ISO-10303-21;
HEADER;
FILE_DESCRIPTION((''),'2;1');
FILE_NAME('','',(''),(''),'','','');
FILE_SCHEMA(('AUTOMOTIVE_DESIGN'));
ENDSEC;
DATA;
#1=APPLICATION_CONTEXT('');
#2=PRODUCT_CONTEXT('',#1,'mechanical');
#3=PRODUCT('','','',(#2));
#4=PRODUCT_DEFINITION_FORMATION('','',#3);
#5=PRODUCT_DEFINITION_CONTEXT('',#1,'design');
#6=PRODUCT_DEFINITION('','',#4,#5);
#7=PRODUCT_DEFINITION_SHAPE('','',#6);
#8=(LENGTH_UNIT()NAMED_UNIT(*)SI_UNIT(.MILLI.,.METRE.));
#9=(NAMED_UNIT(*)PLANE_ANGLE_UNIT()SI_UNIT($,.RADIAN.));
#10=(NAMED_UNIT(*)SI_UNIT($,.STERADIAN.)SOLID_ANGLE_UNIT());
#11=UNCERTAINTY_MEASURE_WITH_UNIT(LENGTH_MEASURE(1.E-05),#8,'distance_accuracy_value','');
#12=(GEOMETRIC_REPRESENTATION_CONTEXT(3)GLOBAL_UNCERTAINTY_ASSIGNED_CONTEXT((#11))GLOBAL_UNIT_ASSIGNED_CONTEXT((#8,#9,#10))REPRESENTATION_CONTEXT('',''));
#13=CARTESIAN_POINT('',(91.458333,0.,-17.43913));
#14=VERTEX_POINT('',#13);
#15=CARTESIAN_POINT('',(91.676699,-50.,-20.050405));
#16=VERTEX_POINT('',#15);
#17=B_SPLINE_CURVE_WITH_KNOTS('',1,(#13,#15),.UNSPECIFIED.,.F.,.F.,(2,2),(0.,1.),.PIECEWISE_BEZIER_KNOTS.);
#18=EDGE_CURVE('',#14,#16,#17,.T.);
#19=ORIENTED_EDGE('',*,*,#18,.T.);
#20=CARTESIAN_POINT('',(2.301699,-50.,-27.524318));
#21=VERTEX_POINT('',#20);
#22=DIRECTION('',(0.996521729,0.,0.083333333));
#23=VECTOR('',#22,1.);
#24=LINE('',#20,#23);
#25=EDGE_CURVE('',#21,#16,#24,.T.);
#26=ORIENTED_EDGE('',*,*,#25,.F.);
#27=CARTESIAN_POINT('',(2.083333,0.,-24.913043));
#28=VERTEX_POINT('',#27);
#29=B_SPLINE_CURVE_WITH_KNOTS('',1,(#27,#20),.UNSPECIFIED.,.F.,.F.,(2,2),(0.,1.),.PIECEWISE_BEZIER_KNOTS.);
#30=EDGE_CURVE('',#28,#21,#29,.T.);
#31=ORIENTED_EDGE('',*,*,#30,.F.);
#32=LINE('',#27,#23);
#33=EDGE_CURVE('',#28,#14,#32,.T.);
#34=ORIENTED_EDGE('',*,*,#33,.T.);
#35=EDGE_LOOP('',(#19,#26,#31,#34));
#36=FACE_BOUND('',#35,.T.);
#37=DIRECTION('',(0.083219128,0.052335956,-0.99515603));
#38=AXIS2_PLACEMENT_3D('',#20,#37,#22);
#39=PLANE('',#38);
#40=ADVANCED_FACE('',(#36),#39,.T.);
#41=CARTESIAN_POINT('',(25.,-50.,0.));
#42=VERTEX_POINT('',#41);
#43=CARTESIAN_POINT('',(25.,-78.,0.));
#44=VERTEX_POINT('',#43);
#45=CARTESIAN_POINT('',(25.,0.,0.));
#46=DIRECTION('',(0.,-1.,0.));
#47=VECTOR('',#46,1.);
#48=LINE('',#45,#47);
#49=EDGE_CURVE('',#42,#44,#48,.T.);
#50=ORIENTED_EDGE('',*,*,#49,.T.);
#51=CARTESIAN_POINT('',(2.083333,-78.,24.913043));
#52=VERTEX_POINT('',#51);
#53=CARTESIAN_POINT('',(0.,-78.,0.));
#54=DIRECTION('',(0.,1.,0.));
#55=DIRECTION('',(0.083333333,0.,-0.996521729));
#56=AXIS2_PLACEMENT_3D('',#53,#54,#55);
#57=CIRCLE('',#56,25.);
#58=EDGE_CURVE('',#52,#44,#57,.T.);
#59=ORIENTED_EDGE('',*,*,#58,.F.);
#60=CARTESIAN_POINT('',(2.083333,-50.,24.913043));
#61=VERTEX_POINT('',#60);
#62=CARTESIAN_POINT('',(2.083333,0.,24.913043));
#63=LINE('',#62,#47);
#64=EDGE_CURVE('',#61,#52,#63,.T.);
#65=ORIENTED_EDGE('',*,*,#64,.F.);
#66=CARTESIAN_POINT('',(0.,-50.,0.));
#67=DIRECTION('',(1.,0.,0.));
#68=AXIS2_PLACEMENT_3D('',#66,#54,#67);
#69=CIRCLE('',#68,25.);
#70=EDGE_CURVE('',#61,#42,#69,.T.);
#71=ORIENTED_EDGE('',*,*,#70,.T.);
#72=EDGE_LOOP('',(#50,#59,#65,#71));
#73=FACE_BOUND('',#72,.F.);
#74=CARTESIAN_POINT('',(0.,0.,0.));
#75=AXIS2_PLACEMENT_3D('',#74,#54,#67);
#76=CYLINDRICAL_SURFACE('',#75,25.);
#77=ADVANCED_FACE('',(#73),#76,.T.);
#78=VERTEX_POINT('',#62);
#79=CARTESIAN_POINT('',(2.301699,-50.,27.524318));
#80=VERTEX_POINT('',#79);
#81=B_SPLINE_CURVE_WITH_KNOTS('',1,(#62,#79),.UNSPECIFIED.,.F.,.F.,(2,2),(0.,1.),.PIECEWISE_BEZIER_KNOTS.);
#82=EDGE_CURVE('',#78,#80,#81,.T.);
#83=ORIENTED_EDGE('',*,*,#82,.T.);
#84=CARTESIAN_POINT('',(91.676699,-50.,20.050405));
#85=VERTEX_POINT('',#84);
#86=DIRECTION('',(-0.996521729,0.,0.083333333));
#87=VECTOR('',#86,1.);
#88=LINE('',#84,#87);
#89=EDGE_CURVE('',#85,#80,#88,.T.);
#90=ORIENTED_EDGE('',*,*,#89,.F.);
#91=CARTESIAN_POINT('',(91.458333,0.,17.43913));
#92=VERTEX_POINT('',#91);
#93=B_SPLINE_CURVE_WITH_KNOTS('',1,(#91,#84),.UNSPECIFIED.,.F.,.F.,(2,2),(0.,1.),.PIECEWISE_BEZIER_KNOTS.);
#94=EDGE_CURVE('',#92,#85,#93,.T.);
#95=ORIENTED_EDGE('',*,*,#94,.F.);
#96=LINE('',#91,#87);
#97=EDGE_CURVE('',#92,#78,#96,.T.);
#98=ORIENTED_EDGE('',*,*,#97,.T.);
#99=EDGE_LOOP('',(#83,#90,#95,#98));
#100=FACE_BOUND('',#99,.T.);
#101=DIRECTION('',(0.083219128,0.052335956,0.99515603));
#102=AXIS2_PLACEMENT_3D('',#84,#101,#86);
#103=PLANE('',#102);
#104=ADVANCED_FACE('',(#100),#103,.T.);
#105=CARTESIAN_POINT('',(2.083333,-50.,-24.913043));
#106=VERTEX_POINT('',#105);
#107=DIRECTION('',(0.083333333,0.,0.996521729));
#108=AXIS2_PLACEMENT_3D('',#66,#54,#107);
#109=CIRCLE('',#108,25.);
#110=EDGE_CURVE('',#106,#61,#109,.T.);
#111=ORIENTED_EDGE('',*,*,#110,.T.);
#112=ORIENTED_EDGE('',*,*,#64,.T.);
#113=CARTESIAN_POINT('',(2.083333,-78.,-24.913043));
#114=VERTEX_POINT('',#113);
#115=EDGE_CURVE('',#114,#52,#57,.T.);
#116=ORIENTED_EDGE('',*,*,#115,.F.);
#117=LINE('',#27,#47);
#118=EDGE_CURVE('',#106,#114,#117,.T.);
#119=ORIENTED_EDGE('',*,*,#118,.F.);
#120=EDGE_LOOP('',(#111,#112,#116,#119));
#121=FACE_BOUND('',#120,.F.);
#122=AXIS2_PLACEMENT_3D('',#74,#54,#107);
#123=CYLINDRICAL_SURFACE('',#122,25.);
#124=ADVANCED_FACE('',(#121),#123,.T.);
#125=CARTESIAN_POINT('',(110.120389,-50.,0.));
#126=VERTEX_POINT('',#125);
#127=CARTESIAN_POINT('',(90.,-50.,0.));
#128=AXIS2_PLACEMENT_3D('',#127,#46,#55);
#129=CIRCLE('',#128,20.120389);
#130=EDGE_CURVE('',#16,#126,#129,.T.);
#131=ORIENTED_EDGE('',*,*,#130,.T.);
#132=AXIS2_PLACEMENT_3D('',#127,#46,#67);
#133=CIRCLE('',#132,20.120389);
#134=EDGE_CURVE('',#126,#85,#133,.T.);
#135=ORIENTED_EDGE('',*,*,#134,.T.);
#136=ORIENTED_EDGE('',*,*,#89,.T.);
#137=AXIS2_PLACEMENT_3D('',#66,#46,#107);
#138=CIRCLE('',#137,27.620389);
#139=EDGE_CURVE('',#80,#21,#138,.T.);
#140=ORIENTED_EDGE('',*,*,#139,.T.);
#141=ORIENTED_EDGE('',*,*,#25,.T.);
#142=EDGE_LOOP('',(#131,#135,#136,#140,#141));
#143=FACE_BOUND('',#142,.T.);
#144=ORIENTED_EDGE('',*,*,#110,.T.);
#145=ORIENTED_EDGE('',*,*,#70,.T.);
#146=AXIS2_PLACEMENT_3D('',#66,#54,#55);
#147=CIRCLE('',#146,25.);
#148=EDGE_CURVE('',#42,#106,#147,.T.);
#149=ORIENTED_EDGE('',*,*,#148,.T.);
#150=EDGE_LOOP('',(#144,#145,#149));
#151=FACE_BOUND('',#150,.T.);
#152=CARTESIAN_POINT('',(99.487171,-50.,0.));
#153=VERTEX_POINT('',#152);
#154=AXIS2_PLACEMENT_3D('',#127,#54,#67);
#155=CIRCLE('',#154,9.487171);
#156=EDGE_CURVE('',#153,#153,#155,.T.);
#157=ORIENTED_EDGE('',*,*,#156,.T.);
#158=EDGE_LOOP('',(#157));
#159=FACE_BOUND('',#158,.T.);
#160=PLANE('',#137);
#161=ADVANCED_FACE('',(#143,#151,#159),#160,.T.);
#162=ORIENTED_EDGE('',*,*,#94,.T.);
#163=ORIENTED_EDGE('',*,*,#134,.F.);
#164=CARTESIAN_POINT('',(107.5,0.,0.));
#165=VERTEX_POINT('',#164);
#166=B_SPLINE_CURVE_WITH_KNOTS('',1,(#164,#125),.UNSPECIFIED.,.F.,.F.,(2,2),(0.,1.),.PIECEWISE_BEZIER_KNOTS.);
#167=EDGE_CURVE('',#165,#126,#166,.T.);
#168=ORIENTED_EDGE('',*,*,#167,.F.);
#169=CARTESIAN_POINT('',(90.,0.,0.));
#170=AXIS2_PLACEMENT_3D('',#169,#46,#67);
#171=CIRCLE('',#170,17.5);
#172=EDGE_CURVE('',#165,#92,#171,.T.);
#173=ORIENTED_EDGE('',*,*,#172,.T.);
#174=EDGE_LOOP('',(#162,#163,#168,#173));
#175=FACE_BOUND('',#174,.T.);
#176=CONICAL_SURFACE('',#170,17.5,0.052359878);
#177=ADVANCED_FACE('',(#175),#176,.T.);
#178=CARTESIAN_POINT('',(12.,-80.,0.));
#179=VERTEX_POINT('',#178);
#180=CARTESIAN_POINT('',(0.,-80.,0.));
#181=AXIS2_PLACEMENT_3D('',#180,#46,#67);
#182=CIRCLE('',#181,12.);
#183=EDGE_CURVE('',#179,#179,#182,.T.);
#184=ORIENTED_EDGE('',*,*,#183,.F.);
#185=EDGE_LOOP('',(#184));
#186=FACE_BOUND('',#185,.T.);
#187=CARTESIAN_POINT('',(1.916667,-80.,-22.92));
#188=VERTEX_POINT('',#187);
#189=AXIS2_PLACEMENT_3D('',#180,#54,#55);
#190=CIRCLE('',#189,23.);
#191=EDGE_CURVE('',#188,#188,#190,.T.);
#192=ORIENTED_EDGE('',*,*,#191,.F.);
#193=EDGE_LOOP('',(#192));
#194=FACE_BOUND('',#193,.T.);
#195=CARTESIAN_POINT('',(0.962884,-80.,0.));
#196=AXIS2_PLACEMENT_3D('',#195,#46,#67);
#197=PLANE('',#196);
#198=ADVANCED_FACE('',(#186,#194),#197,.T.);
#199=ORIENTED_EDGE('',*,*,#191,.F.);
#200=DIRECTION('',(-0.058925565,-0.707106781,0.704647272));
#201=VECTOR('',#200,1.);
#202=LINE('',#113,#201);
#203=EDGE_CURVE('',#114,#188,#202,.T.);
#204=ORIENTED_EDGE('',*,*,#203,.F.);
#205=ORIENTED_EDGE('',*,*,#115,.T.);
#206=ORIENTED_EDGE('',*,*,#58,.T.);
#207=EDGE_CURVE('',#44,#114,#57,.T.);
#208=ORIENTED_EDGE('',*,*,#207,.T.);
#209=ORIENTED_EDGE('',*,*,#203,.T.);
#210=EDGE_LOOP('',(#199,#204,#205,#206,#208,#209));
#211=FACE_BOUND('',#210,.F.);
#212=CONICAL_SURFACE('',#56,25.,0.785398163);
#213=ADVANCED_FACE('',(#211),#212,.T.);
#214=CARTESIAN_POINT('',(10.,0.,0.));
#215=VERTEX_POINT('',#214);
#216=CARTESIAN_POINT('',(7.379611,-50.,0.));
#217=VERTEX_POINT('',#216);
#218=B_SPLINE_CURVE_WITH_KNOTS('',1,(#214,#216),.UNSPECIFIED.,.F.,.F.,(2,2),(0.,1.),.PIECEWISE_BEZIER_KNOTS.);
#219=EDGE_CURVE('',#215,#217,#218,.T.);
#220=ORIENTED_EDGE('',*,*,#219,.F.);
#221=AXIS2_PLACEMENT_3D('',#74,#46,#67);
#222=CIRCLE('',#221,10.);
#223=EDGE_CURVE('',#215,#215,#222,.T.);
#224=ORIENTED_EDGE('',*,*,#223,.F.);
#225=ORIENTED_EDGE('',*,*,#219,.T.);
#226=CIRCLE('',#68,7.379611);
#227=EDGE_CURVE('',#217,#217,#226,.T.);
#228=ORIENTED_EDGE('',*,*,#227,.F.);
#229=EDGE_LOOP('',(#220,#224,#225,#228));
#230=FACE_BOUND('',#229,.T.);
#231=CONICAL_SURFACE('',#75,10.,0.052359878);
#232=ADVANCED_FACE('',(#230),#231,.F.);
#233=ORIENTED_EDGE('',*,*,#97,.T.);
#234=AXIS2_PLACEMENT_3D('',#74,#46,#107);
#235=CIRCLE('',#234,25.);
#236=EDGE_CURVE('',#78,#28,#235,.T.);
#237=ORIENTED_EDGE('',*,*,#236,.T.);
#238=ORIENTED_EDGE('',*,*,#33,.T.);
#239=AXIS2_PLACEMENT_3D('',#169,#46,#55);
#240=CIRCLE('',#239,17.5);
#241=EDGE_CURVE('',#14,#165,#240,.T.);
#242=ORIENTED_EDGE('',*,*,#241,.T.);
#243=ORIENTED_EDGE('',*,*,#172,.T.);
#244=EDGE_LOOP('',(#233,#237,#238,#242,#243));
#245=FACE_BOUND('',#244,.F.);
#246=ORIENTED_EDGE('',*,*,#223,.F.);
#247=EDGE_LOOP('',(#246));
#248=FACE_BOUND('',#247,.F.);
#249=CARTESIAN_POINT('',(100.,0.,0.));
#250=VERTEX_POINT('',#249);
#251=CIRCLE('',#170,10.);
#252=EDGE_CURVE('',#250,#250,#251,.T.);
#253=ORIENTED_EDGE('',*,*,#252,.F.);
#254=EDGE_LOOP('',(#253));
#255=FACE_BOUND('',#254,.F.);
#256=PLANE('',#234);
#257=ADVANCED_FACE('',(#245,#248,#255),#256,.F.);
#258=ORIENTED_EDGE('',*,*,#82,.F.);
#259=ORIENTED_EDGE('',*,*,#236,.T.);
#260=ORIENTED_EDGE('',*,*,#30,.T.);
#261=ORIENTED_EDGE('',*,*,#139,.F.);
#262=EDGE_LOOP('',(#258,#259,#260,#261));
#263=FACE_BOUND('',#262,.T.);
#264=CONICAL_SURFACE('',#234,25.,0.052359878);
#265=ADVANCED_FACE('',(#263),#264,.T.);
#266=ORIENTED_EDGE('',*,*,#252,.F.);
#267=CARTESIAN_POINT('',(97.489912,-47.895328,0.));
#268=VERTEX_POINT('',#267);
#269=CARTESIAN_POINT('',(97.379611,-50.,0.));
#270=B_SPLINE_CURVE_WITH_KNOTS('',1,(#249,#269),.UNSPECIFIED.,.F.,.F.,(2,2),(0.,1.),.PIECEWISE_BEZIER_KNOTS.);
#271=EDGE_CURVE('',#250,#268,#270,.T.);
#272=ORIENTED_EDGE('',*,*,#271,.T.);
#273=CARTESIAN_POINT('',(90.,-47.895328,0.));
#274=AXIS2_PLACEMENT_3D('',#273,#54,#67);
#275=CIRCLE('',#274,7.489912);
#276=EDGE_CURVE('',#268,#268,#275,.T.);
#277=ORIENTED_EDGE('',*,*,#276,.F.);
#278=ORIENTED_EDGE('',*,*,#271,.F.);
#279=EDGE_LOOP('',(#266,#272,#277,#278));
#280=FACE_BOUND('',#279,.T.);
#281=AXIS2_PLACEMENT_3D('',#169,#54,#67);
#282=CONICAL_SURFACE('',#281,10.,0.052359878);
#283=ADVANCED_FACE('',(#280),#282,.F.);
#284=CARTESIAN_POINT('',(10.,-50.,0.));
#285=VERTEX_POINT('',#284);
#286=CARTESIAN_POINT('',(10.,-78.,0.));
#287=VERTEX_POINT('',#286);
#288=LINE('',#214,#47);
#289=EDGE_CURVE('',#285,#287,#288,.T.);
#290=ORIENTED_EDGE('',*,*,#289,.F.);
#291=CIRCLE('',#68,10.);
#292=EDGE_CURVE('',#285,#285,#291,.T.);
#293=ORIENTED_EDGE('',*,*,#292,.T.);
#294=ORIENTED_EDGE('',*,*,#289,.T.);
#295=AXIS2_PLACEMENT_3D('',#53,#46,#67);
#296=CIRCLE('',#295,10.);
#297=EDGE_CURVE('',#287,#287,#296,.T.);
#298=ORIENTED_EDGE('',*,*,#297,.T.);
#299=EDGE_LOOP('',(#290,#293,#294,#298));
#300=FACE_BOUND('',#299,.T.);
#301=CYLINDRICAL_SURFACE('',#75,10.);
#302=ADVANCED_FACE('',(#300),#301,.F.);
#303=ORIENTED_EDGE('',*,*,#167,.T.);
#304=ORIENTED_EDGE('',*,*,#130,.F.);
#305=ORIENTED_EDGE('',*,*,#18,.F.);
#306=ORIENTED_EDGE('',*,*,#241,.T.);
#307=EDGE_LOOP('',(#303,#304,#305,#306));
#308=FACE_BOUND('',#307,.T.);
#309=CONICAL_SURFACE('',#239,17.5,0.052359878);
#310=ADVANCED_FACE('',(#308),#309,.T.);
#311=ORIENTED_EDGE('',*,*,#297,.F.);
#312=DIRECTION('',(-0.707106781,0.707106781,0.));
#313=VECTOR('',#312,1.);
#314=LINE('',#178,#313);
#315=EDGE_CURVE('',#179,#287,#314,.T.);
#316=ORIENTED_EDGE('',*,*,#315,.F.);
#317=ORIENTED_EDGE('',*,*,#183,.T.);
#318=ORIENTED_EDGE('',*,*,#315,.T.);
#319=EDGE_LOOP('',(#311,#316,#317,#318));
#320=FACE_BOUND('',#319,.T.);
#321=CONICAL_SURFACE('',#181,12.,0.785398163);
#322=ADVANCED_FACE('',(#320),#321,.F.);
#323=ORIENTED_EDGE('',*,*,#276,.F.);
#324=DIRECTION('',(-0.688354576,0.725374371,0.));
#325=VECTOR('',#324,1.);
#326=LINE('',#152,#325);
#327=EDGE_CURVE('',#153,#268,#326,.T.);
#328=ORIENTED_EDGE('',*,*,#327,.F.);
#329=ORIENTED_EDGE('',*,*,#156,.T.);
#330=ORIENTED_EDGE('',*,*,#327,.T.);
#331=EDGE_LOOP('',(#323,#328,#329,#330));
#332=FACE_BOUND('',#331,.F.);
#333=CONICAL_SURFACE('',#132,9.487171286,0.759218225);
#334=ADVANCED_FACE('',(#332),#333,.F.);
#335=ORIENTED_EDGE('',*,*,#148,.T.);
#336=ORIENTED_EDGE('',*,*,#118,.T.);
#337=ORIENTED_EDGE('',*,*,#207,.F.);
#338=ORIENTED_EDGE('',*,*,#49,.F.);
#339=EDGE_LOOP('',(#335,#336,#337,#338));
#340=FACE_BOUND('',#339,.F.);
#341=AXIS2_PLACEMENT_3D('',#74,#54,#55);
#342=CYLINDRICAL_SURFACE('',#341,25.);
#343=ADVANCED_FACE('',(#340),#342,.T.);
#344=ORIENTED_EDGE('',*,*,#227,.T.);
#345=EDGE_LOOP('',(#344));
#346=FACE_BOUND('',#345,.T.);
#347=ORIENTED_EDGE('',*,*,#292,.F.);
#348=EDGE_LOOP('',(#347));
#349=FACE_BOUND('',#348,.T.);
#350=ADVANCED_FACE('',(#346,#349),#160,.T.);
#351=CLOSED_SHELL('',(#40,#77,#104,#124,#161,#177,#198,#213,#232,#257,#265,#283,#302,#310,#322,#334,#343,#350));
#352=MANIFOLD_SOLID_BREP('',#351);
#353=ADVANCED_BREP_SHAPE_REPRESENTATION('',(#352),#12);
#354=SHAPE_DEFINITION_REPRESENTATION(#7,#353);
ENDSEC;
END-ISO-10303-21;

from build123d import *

# Parameters (mm, degrees)
F0_R     = 10
F1_DEPTH = 50
F1_TAPER = -3
F2_DEPTH = 80


# Not quite as in the source:
# - a fillet or chamfer that OpenCascade refuses, or shapes differently, is made with other operations: its cross-section is extruded or revolved along the edge and cut away or added


with BuildPart() as f1:
    # F0 (on Front) → F1 (new body)
    with BuildSketch(Plane.XZ):
        with BuildLine():
            ThreePointArc((2.0833333333, -24.9130432148), (18.3995018048, -16.9250800097), (25, 0))
            ThreePointArc((25, 0), (18.3995018048, 16.9250800097), (2.0833333333, 24.9130432148))
            ThreePointArc((2.0833333333, 24.9130432148), (-25, 0), (2.0833333333, -24.9130432148))
        make_face()
        Circle(F0_R, mode=Mode.SUBTRACT)
        with BuildLine():
            ThreePointArc((2.0833333333, 24.9130432148), (18.3995018048, 16.9250800097), (25, 0))
            ThreePointArc((25, 0), (18.3995018048, -16.9250800097), (2.0833333333, -24.9130432148))
            Line((2.0833333333, -24.9130432148), (91.4583333333, -17.4391302504))
            ThreePointArc((91.4583333333, -17.4391302504), (72.5, 0), (91.4583333333, 17.4391302504))
            Line((91.4583333333, 17.4391302504), (2.0833333333, 24.9130432148))
        make_face()
        with BuildLine():
            ThreePointArc((107.5, 0), (102.8796512634, 11.8475560068), (91.4583333333, 17.4391302504))
            ThreePointArc((91.4583333333, 17.4391302504), (72.5, 0), (91.4583333333, -17.4391302504))
            ThreePointArc((91.4583333333, -17.4391302504), (102.8796512634, -11.8475560068), (107.5, 0))
        make_face()
        with Locations((90, 0)):
            Circle(F0_R, mode=Mode.SUBTRACT)
    extrude(amount=F1_DEPTH, taper=F1_TAPER)

    # F0 (on Front) → F2 (join)
    with BuildSketch(Plane.XZ):
        with BuildLine():
            ThreePointArc((2.0833333333, -24.9130432148), (18.3995018048, -16.9250800097), (25, 0))
            ThreePointArc((25, 0), (18.3995018048, 16.9250800097), (2.0833333333, 24.9130432148))
            ThreePointArc((2.0833333333, 24.9130432148), (-25, 0), (2.0833333333, -24.9130432148))
        make_face()
        Circle(F0_R, mode=Mode.SUBTRACT)
    extrude(amount=F2_DEPTH)

    # F3: chamfer of 2 on 3 edges, made by hand

    # F3_s1 → F3_t2 (revolve, cut)
    with BuildSketch(Plane(origin=(0, 0, 0), x_dir=(0, 1, 0), z_dir=(0.9965217286, 0, 0.0833333333))):
        Polygon((-78, -25), (-80, -23), (-80, -25), align=None)
    revolve(axis=Axis((0, -80, 0), (0, 1, 0)), mode=Mode.SUBTRACT)

    # F3_s3 → F3_t4 (revolve, cut)
    with BuildSketch(Plane.XY):
        Polygon((12, -80), (10, -78), (10, -80), align=None)
    revolve(axis=Axis((0, -80, 0), (0, -1, 0)), mode=Mode.SUBTRACT)

    # F3_s5 → F3_t6 (revolve, cut)
    with BuildSketch(Plane.XY):
        Polygon((99.4871712864, -50), (97.4899122169, -47.8953280875), (97.3796110358, -50), align=None)
    revolve(axis=Axis((90, -50, 0), (0, 1, 0)), mode=Mode.SUBTRACT)


solid = f1.part
